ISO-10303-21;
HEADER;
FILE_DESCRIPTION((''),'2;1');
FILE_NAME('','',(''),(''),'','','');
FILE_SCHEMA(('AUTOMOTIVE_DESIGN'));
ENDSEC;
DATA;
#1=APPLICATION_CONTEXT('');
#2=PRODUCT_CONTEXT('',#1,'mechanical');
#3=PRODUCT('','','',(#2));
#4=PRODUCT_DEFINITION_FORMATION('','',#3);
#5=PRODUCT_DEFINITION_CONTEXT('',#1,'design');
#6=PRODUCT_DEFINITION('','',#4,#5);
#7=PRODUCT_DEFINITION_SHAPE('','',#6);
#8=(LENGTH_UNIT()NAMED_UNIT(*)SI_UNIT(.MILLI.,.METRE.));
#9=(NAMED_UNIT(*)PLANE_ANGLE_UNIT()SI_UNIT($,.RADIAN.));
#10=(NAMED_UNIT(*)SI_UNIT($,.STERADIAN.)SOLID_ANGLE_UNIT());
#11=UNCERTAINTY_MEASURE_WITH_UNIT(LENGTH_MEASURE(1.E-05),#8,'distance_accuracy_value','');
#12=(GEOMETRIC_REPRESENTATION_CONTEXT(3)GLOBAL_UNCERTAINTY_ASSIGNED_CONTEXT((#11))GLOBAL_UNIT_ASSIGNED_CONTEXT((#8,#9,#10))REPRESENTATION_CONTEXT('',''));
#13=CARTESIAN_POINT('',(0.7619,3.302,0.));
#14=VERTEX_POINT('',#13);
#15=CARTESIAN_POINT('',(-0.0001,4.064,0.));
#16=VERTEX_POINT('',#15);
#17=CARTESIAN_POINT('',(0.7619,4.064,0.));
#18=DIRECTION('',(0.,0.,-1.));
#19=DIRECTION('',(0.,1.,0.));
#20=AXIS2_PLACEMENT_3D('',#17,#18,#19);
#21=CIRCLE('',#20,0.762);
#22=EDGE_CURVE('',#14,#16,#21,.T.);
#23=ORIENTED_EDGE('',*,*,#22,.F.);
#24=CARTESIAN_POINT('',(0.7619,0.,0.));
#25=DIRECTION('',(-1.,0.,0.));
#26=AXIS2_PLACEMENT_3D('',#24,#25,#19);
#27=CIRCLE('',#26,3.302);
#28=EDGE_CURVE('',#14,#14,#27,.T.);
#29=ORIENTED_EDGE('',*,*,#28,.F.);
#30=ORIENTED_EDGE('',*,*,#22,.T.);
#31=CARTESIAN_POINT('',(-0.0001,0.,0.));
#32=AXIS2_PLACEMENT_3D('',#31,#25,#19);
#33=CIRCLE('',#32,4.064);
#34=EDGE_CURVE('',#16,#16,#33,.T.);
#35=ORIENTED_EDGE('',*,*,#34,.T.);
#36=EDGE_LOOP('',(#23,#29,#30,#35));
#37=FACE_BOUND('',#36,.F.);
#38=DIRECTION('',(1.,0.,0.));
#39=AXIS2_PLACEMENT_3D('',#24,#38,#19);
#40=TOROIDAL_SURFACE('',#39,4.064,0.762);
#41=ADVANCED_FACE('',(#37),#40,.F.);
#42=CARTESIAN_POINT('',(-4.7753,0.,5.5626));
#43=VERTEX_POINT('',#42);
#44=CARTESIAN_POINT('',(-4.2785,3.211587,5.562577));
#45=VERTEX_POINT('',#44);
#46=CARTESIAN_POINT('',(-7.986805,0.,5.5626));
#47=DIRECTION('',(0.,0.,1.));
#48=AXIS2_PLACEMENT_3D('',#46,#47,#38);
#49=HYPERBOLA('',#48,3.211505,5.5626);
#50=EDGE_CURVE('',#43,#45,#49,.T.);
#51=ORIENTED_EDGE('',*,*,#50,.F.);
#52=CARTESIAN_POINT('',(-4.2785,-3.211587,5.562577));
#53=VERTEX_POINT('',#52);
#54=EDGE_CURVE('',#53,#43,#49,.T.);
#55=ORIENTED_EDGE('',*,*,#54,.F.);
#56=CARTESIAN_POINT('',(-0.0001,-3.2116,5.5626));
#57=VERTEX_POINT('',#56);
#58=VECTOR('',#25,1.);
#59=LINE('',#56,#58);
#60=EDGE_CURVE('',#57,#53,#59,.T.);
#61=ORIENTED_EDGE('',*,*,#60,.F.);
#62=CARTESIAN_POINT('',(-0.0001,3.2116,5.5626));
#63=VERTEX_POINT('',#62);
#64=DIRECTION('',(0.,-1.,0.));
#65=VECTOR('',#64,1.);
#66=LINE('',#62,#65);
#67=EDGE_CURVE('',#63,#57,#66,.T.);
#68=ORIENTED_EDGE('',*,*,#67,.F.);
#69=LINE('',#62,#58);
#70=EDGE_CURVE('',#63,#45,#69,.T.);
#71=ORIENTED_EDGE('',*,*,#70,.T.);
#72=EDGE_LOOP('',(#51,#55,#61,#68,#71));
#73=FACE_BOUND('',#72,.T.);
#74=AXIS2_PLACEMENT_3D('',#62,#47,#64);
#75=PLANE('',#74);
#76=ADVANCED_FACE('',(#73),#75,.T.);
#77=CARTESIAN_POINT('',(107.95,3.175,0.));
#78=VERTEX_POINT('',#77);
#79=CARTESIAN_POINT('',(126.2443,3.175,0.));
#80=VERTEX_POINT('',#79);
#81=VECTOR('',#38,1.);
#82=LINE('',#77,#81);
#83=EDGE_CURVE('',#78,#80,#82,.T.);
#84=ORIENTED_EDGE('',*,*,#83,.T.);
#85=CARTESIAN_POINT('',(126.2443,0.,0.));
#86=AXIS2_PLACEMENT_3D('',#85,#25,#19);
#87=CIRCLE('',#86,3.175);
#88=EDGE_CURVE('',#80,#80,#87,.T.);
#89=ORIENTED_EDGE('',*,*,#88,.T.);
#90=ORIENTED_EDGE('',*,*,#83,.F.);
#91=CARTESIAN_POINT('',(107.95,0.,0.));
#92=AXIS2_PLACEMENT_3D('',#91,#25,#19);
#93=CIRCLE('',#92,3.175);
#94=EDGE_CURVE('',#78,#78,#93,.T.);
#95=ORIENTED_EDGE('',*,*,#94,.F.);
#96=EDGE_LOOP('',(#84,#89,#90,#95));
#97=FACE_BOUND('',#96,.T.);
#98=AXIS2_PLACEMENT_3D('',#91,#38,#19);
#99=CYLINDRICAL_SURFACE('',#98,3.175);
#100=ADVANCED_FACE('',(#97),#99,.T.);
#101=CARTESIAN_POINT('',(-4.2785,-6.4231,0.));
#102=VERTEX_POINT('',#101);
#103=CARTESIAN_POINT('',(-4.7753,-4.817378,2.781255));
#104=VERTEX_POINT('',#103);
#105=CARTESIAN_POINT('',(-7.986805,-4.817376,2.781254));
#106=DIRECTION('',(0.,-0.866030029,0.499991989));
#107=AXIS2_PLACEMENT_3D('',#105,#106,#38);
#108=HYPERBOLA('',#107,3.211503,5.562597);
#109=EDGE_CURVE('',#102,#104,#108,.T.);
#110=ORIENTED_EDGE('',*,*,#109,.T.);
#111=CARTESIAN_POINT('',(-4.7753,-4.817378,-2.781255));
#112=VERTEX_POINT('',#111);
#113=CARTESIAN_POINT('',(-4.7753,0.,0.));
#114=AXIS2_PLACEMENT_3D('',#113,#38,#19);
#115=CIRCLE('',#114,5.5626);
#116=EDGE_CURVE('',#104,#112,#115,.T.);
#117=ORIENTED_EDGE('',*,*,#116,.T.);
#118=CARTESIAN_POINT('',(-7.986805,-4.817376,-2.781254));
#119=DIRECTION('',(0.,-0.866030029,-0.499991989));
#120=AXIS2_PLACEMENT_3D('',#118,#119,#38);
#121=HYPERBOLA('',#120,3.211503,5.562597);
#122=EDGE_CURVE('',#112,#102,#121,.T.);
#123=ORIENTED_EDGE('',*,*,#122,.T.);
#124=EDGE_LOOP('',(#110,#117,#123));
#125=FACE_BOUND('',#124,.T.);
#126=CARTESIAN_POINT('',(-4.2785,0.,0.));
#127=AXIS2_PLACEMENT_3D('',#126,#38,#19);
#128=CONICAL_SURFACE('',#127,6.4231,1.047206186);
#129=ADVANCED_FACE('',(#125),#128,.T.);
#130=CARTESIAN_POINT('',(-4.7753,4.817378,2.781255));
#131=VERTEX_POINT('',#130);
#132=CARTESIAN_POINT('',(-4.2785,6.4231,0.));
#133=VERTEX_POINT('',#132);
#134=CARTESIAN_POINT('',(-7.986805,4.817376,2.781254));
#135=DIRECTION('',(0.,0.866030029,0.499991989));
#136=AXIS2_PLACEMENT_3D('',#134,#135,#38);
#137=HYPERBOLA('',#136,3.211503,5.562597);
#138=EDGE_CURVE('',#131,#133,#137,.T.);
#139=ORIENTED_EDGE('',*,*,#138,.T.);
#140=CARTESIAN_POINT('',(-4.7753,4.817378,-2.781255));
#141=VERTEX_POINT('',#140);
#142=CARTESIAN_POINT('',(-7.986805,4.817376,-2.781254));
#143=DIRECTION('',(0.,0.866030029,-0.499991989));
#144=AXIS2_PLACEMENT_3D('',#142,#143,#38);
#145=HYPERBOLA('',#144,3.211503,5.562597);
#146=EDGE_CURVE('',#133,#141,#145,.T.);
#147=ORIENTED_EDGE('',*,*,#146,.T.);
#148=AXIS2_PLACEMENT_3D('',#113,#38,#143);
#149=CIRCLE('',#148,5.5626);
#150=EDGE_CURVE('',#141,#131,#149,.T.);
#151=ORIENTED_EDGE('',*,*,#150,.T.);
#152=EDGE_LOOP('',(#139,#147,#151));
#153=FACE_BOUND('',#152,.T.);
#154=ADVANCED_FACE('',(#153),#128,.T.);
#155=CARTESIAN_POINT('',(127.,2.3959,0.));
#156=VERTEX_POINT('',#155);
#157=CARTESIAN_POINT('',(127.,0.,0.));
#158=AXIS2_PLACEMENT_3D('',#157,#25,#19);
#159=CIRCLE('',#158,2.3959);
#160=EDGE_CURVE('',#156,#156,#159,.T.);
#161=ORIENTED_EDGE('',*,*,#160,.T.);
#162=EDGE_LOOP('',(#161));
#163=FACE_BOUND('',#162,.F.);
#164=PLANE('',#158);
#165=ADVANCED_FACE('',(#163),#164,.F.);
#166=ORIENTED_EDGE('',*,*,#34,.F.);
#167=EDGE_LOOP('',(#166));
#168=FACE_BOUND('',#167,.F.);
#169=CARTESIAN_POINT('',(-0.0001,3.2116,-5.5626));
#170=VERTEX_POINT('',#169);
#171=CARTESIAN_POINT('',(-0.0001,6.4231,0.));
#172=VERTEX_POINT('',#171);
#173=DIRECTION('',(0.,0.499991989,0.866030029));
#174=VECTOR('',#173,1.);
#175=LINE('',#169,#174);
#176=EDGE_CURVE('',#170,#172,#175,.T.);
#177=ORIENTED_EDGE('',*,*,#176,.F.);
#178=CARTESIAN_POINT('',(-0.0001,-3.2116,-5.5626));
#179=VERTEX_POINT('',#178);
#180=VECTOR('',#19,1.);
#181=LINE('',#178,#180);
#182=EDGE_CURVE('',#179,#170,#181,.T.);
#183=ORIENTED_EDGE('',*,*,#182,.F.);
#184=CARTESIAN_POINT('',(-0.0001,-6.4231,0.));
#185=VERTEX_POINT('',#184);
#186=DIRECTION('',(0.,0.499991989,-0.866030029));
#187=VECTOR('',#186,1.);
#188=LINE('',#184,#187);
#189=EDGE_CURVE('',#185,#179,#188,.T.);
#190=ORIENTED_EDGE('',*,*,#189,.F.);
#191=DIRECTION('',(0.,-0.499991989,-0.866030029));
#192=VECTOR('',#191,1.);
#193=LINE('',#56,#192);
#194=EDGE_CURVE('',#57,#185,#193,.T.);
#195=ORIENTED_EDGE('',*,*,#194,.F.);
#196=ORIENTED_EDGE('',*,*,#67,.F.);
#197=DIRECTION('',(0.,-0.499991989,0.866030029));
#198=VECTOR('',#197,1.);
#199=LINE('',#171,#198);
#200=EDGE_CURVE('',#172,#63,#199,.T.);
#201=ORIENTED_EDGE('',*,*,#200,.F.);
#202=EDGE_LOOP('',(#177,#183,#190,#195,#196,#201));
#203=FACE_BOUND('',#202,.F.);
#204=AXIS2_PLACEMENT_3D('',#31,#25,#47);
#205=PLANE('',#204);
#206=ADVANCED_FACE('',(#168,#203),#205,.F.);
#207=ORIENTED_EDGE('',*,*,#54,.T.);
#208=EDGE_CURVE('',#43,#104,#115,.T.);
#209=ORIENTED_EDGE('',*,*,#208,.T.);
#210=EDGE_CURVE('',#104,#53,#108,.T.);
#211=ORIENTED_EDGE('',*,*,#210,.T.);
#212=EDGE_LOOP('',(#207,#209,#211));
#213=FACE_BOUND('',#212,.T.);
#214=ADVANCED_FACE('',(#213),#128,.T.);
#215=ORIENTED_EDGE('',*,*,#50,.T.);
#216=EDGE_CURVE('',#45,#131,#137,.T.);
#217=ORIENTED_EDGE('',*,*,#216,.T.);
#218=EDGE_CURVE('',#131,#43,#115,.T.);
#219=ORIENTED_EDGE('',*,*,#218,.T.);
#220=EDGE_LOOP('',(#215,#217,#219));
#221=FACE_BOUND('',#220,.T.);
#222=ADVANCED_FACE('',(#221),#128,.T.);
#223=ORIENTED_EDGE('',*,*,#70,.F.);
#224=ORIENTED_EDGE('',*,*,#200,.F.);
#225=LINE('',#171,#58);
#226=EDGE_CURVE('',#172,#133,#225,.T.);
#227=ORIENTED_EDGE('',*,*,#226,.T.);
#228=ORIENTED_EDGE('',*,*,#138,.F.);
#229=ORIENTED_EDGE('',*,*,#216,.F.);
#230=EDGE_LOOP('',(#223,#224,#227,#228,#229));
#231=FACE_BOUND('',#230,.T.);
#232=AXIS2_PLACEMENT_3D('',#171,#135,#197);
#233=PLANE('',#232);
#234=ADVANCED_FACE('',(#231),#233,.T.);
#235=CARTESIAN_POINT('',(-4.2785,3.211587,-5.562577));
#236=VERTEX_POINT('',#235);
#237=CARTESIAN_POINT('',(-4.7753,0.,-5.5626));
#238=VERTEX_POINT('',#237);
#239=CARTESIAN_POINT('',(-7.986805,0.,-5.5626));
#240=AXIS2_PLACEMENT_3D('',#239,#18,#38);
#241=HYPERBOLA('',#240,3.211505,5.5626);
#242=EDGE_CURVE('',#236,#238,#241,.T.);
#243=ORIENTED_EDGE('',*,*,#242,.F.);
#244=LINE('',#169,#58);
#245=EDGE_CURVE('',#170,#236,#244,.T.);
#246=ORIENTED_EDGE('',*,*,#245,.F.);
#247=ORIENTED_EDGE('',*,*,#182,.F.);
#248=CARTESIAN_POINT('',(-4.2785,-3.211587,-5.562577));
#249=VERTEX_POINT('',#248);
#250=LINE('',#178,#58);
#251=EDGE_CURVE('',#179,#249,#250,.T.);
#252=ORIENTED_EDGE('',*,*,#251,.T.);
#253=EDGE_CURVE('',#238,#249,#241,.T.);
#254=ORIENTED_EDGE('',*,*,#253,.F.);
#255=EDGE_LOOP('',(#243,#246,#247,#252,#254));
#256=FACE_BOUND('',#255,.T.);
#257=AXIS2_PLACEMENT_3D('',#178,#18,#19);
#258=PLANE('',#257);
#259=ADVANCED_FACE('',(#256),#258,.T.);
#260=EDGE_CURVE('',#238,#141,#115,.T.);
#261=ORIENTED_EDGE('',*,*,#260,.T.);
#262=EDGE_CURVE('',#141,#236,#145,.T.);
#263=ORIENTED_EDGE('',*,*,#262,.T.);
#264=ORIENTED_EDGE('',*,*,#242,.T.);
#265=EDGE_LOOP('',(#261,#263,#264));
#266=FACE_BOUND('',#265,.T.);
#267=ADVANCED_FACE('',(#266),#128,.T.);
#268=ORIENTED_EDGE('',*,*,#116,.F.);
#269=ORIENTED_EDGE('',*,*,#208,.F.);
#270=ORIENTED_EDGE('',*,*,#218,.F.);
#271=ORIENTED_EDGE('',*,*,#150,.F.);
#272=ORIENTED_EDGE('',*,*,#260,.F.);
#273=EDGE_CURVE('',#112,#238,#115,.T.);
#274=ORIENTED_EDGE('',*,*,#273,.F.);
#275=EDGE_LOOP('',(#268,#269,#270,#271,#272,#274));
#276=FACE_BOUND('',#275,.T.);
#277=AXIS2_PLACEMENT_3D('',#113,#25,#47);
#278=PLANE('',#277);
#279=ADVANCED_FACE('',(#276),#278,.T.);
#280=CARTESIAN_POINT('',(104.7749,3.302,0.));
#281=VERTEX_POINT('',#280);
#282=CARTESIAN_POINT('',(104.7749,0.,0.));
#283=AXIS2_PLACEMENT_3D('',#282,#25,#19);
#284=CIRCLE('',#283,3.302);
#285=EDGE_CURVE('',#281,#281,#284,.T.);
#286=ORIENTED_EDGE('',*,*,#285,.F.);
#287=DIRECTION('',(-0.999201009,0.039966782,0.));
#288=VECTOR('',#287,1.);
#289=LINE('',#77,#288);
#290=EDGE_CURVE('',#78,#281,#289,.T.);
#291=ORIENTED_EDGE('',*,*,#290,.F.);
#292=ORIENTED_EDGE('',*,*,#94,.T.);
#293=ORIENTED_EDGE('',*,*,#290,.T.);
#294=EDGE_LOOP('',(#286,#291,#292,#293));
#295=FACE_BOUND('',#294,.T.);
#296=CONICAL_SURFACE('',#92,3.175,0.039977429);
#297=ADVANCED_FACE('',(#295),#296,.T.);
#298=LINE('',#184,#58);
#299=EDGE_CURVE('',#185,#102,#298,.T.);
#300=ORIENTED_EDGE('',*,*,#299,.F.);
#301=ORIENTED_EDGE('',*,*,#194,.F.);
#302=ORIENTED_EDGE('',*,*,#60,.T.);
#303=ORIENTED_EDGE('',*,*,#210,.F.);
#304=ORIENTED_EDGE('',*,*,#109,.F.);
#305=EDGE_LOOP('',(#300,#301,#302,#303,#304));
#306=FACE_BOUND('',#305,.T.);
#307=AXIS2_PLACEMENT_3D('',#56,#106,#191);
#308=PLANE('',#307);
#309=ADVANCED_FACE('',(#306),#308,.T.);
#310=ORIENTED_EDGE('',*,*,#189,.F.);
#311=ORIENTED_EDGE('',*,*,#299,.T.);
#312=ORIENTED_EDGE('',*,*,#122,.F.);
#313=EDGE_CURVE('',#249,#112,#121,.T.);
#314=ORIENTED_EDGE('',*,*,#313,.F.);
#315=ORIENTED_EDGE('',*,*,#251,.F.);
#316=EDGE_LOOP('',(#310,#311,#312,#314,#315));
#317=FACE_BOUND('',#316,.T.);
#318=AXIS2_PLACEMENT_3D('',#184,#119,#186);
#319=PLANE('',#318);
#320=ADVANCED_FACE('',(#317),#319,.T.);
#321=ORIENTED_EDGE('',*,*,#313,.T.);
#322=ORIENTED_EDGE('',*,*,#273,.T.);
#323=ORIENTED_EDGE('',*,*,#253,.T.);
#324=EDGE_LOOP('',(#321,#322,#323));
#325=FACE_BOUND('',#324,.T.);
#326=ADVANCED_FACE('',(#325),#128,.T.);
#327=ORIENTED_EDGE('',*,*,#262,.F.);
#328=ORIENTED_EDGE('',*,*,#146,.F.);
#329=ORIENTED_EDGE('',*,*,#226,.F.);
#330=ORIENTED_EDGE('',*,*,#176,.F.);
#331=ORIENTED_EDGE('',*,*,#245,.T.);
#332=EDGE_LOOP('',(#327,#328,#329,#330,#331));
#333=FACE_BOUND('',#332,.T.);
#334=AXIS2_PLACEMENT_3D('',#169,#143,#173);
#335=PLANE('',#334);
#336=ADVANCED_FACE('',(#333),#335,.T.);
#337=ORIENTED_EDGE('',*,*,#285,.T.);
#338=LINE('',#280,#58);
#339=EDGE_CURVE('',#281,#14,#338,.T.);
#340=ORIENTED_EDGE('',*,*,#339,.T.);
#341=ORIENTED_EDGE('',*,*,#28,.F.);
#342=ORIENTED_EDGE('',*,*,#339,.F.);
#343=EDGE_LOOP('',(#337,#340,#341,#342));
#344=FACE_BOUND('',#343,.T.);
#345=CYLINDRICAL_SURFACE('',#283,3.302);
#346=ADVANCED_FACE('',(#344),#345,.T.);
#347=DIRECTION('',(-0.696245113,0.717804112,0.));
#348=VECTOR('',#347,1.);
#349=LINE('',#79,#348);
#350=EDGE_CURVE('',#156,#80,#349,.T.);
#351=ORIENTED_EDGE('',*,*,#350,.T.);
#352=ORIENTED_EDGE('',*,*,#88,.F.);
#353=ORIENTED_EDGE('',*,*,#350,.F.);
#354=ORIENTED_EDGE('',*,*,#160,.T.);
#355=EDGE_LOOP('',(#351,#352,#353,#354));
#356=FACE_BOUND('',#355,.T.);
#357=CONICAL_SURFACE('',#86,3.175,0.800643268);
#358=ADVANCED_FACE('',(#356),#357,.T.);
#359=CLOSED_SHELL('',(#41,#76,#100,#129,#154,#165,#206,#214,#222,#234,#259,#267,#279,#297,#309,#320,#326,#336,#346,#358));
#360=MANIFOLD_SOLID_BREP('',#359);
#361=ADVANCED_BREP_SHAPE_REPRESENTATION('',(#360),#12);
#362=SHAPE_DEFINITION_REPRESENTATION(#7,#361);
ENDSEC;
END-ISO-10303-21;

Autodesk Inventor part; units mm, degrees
ref_plane "YZ Plane" through (0, 0, 0) normal (1, 0, 0) x (0, 1, 0)
ref_plane "XZ Plane" through (0, 0, 0) normal (0, 1, 0) x (-1, 0, 0)
sketch "Sketch1" plane through (0, 0, 0) normal (0, 0, 1) x (1, 0, 0)
  line L0 (0, 5.5626) -> (0, 3.302)
  line L1 (107.95, 3.175) -> (127, 3.175)
  line L2 (127, 3.175) -> (127, 0)
  line L3 (127, 0) -> (-0.0001, 0)
  line L4 (-25.4001, 0) -> (152.4, 0) projected
  line L5 (-0.0001, 0) -> (-0.0001, 5.5626)
  line L6 (-0.0001, 5.5626) -> (0, 5.5626)
  line L7 (107.95, 3.175) -> (104.7749, 3.302)
  line L8 (104.7749, 3.302) -> (0, 3.302)
  line L9 (0, -1.1125) -> (0, 6.6751) projected
  dimension "d0" = 127
  dimension "d1" = 19.05
  dimension "d2" = 6.35
  dimension "d9" = 0.0001
  dimension "d10" = 11.1252
  dimension "d13" = 3.1751
  dimension "d14" = 6.604
revolve "Body" add sketch "Sketch1" angle 360 about axis through (127, 0, 0) along (-1, 0, 0)
sketch "Sketch2" plane through (-0.0001, 0, 0) normal (-1, 0, 0) x (0, 0, 1)
  line L0 (0, 6.4231) -> (5.5626, 3.2116)
  line L1 (5.5626, 3.2116) -> (5.5626, -3.2116)
  line L2 (5.5626, -3.2116) -> (0, -6.4231)
  line L3 (0, -6.4231) -> (-5.5626, -3.2116)
  line L4 (-5.5626, -3.2116) -> (-5.5626, 3.2116)
  line L5 (-5.5626, 3.2116) -> (0, 6.4231)
  point P0 (0, 0)
  point P1 (0, 0)
  dimension "d11" = 11.1252
extrude "Head" add sketch "Sketch2" along normal blind 4.7752
sketch "Sketch4" plane through (0, 0, 0) normal (0, 0, 1) x (1, 0, 0)
  line L0 (-4.7753, 5.5626) -> (-4.7753, 6.4231)
  line L1 (-4.7753, 6.4231) -> (-4.2785, 6.4231)
  line L2 (-4.2785, 6.4231) -> (-4.7753, 5.5626)
  line L3 (-5.7303, 0) -> (0.9549, 0) projected
  line L4 (-0.0001, 6.4231) -> (-4.7753, 6.4231) projected
  line L5 (-4.7753, 3.2116) -> (-4.7753, 6.4231) projected
  dimension "d5" = 30
  dimension "d19" = 11.1252
revolve "Chamfer1" cut sketch "Sketch4" angle 360 about axis through (-10, 0, 0) along (1, 0, 0)
thread "Thread" size "1/4-20 UNC" class "2A" standard "ANSI Unified Screw Threads" length 19.05
chamfer "Chamfer2" distance 0.7791 distance2 0.7557 1 edges at (127, -3.175, 0) measured on face at (127, -0.5202, 1.1995)
ref_plane "Work Plane1" through (1.525, 0, 0) normal (0, 0, 1) x (1, 0, 0)
fillet "Fillet2" radius 0.762 1 edges at (0, -3.302, 0)
equation "\"d0\" = NLG"
equation "\"d1\" = GEL"
equation "\"d2\" = GD"
equation "\"d10\" = SD2"
equation "\"d14\" = BDM"
equation "\"d11\" = SW"
equation "\"d3\" = KOH - SD"
equation "\"d5\" = ANG1"
equation "\"d19\" = SW0"
equation "\"d63\" = R"
equation "\"d15\" = GEL"
equation "\"d6\" = -0.5 * SPD + 0.5 * GD"
equation "\"NLG\" = 127"
equation "\"GD\" = NND"
equation "\"BDM\" = 6.604"
equation "\"KOH\" = 4.7752"
equation "\"GEL\" = 19.05"
equation "\"SW\" = 11.1252"
equation "\"SW0\" = SW"
equation "\"SPD\" = GD1"
equation "\"SD2\" = SW"
equation "\"SD\" = 0"
equation "\"ANG1\" = 30deg"
equation "\"GAL\" = 3.175"
equation "\"GUL\" = 0.238 * GAL"
equation "\"R\" = 0.762"
equation "\"d62\" = -NLG - SD + GUL"
equation "\"GD1\" = 4.79184"
equation "\"THREADDIA\" = 6.35"
equation "\"TOA\" = 30deg"
equation "\"NND\" = 6.35"
equation "\"E0\" = 1.155 * SW"
properties part number "ANSI/ASME B18.2.1 - 1/4-20 UNC - 5" material "Steel, Mild"
